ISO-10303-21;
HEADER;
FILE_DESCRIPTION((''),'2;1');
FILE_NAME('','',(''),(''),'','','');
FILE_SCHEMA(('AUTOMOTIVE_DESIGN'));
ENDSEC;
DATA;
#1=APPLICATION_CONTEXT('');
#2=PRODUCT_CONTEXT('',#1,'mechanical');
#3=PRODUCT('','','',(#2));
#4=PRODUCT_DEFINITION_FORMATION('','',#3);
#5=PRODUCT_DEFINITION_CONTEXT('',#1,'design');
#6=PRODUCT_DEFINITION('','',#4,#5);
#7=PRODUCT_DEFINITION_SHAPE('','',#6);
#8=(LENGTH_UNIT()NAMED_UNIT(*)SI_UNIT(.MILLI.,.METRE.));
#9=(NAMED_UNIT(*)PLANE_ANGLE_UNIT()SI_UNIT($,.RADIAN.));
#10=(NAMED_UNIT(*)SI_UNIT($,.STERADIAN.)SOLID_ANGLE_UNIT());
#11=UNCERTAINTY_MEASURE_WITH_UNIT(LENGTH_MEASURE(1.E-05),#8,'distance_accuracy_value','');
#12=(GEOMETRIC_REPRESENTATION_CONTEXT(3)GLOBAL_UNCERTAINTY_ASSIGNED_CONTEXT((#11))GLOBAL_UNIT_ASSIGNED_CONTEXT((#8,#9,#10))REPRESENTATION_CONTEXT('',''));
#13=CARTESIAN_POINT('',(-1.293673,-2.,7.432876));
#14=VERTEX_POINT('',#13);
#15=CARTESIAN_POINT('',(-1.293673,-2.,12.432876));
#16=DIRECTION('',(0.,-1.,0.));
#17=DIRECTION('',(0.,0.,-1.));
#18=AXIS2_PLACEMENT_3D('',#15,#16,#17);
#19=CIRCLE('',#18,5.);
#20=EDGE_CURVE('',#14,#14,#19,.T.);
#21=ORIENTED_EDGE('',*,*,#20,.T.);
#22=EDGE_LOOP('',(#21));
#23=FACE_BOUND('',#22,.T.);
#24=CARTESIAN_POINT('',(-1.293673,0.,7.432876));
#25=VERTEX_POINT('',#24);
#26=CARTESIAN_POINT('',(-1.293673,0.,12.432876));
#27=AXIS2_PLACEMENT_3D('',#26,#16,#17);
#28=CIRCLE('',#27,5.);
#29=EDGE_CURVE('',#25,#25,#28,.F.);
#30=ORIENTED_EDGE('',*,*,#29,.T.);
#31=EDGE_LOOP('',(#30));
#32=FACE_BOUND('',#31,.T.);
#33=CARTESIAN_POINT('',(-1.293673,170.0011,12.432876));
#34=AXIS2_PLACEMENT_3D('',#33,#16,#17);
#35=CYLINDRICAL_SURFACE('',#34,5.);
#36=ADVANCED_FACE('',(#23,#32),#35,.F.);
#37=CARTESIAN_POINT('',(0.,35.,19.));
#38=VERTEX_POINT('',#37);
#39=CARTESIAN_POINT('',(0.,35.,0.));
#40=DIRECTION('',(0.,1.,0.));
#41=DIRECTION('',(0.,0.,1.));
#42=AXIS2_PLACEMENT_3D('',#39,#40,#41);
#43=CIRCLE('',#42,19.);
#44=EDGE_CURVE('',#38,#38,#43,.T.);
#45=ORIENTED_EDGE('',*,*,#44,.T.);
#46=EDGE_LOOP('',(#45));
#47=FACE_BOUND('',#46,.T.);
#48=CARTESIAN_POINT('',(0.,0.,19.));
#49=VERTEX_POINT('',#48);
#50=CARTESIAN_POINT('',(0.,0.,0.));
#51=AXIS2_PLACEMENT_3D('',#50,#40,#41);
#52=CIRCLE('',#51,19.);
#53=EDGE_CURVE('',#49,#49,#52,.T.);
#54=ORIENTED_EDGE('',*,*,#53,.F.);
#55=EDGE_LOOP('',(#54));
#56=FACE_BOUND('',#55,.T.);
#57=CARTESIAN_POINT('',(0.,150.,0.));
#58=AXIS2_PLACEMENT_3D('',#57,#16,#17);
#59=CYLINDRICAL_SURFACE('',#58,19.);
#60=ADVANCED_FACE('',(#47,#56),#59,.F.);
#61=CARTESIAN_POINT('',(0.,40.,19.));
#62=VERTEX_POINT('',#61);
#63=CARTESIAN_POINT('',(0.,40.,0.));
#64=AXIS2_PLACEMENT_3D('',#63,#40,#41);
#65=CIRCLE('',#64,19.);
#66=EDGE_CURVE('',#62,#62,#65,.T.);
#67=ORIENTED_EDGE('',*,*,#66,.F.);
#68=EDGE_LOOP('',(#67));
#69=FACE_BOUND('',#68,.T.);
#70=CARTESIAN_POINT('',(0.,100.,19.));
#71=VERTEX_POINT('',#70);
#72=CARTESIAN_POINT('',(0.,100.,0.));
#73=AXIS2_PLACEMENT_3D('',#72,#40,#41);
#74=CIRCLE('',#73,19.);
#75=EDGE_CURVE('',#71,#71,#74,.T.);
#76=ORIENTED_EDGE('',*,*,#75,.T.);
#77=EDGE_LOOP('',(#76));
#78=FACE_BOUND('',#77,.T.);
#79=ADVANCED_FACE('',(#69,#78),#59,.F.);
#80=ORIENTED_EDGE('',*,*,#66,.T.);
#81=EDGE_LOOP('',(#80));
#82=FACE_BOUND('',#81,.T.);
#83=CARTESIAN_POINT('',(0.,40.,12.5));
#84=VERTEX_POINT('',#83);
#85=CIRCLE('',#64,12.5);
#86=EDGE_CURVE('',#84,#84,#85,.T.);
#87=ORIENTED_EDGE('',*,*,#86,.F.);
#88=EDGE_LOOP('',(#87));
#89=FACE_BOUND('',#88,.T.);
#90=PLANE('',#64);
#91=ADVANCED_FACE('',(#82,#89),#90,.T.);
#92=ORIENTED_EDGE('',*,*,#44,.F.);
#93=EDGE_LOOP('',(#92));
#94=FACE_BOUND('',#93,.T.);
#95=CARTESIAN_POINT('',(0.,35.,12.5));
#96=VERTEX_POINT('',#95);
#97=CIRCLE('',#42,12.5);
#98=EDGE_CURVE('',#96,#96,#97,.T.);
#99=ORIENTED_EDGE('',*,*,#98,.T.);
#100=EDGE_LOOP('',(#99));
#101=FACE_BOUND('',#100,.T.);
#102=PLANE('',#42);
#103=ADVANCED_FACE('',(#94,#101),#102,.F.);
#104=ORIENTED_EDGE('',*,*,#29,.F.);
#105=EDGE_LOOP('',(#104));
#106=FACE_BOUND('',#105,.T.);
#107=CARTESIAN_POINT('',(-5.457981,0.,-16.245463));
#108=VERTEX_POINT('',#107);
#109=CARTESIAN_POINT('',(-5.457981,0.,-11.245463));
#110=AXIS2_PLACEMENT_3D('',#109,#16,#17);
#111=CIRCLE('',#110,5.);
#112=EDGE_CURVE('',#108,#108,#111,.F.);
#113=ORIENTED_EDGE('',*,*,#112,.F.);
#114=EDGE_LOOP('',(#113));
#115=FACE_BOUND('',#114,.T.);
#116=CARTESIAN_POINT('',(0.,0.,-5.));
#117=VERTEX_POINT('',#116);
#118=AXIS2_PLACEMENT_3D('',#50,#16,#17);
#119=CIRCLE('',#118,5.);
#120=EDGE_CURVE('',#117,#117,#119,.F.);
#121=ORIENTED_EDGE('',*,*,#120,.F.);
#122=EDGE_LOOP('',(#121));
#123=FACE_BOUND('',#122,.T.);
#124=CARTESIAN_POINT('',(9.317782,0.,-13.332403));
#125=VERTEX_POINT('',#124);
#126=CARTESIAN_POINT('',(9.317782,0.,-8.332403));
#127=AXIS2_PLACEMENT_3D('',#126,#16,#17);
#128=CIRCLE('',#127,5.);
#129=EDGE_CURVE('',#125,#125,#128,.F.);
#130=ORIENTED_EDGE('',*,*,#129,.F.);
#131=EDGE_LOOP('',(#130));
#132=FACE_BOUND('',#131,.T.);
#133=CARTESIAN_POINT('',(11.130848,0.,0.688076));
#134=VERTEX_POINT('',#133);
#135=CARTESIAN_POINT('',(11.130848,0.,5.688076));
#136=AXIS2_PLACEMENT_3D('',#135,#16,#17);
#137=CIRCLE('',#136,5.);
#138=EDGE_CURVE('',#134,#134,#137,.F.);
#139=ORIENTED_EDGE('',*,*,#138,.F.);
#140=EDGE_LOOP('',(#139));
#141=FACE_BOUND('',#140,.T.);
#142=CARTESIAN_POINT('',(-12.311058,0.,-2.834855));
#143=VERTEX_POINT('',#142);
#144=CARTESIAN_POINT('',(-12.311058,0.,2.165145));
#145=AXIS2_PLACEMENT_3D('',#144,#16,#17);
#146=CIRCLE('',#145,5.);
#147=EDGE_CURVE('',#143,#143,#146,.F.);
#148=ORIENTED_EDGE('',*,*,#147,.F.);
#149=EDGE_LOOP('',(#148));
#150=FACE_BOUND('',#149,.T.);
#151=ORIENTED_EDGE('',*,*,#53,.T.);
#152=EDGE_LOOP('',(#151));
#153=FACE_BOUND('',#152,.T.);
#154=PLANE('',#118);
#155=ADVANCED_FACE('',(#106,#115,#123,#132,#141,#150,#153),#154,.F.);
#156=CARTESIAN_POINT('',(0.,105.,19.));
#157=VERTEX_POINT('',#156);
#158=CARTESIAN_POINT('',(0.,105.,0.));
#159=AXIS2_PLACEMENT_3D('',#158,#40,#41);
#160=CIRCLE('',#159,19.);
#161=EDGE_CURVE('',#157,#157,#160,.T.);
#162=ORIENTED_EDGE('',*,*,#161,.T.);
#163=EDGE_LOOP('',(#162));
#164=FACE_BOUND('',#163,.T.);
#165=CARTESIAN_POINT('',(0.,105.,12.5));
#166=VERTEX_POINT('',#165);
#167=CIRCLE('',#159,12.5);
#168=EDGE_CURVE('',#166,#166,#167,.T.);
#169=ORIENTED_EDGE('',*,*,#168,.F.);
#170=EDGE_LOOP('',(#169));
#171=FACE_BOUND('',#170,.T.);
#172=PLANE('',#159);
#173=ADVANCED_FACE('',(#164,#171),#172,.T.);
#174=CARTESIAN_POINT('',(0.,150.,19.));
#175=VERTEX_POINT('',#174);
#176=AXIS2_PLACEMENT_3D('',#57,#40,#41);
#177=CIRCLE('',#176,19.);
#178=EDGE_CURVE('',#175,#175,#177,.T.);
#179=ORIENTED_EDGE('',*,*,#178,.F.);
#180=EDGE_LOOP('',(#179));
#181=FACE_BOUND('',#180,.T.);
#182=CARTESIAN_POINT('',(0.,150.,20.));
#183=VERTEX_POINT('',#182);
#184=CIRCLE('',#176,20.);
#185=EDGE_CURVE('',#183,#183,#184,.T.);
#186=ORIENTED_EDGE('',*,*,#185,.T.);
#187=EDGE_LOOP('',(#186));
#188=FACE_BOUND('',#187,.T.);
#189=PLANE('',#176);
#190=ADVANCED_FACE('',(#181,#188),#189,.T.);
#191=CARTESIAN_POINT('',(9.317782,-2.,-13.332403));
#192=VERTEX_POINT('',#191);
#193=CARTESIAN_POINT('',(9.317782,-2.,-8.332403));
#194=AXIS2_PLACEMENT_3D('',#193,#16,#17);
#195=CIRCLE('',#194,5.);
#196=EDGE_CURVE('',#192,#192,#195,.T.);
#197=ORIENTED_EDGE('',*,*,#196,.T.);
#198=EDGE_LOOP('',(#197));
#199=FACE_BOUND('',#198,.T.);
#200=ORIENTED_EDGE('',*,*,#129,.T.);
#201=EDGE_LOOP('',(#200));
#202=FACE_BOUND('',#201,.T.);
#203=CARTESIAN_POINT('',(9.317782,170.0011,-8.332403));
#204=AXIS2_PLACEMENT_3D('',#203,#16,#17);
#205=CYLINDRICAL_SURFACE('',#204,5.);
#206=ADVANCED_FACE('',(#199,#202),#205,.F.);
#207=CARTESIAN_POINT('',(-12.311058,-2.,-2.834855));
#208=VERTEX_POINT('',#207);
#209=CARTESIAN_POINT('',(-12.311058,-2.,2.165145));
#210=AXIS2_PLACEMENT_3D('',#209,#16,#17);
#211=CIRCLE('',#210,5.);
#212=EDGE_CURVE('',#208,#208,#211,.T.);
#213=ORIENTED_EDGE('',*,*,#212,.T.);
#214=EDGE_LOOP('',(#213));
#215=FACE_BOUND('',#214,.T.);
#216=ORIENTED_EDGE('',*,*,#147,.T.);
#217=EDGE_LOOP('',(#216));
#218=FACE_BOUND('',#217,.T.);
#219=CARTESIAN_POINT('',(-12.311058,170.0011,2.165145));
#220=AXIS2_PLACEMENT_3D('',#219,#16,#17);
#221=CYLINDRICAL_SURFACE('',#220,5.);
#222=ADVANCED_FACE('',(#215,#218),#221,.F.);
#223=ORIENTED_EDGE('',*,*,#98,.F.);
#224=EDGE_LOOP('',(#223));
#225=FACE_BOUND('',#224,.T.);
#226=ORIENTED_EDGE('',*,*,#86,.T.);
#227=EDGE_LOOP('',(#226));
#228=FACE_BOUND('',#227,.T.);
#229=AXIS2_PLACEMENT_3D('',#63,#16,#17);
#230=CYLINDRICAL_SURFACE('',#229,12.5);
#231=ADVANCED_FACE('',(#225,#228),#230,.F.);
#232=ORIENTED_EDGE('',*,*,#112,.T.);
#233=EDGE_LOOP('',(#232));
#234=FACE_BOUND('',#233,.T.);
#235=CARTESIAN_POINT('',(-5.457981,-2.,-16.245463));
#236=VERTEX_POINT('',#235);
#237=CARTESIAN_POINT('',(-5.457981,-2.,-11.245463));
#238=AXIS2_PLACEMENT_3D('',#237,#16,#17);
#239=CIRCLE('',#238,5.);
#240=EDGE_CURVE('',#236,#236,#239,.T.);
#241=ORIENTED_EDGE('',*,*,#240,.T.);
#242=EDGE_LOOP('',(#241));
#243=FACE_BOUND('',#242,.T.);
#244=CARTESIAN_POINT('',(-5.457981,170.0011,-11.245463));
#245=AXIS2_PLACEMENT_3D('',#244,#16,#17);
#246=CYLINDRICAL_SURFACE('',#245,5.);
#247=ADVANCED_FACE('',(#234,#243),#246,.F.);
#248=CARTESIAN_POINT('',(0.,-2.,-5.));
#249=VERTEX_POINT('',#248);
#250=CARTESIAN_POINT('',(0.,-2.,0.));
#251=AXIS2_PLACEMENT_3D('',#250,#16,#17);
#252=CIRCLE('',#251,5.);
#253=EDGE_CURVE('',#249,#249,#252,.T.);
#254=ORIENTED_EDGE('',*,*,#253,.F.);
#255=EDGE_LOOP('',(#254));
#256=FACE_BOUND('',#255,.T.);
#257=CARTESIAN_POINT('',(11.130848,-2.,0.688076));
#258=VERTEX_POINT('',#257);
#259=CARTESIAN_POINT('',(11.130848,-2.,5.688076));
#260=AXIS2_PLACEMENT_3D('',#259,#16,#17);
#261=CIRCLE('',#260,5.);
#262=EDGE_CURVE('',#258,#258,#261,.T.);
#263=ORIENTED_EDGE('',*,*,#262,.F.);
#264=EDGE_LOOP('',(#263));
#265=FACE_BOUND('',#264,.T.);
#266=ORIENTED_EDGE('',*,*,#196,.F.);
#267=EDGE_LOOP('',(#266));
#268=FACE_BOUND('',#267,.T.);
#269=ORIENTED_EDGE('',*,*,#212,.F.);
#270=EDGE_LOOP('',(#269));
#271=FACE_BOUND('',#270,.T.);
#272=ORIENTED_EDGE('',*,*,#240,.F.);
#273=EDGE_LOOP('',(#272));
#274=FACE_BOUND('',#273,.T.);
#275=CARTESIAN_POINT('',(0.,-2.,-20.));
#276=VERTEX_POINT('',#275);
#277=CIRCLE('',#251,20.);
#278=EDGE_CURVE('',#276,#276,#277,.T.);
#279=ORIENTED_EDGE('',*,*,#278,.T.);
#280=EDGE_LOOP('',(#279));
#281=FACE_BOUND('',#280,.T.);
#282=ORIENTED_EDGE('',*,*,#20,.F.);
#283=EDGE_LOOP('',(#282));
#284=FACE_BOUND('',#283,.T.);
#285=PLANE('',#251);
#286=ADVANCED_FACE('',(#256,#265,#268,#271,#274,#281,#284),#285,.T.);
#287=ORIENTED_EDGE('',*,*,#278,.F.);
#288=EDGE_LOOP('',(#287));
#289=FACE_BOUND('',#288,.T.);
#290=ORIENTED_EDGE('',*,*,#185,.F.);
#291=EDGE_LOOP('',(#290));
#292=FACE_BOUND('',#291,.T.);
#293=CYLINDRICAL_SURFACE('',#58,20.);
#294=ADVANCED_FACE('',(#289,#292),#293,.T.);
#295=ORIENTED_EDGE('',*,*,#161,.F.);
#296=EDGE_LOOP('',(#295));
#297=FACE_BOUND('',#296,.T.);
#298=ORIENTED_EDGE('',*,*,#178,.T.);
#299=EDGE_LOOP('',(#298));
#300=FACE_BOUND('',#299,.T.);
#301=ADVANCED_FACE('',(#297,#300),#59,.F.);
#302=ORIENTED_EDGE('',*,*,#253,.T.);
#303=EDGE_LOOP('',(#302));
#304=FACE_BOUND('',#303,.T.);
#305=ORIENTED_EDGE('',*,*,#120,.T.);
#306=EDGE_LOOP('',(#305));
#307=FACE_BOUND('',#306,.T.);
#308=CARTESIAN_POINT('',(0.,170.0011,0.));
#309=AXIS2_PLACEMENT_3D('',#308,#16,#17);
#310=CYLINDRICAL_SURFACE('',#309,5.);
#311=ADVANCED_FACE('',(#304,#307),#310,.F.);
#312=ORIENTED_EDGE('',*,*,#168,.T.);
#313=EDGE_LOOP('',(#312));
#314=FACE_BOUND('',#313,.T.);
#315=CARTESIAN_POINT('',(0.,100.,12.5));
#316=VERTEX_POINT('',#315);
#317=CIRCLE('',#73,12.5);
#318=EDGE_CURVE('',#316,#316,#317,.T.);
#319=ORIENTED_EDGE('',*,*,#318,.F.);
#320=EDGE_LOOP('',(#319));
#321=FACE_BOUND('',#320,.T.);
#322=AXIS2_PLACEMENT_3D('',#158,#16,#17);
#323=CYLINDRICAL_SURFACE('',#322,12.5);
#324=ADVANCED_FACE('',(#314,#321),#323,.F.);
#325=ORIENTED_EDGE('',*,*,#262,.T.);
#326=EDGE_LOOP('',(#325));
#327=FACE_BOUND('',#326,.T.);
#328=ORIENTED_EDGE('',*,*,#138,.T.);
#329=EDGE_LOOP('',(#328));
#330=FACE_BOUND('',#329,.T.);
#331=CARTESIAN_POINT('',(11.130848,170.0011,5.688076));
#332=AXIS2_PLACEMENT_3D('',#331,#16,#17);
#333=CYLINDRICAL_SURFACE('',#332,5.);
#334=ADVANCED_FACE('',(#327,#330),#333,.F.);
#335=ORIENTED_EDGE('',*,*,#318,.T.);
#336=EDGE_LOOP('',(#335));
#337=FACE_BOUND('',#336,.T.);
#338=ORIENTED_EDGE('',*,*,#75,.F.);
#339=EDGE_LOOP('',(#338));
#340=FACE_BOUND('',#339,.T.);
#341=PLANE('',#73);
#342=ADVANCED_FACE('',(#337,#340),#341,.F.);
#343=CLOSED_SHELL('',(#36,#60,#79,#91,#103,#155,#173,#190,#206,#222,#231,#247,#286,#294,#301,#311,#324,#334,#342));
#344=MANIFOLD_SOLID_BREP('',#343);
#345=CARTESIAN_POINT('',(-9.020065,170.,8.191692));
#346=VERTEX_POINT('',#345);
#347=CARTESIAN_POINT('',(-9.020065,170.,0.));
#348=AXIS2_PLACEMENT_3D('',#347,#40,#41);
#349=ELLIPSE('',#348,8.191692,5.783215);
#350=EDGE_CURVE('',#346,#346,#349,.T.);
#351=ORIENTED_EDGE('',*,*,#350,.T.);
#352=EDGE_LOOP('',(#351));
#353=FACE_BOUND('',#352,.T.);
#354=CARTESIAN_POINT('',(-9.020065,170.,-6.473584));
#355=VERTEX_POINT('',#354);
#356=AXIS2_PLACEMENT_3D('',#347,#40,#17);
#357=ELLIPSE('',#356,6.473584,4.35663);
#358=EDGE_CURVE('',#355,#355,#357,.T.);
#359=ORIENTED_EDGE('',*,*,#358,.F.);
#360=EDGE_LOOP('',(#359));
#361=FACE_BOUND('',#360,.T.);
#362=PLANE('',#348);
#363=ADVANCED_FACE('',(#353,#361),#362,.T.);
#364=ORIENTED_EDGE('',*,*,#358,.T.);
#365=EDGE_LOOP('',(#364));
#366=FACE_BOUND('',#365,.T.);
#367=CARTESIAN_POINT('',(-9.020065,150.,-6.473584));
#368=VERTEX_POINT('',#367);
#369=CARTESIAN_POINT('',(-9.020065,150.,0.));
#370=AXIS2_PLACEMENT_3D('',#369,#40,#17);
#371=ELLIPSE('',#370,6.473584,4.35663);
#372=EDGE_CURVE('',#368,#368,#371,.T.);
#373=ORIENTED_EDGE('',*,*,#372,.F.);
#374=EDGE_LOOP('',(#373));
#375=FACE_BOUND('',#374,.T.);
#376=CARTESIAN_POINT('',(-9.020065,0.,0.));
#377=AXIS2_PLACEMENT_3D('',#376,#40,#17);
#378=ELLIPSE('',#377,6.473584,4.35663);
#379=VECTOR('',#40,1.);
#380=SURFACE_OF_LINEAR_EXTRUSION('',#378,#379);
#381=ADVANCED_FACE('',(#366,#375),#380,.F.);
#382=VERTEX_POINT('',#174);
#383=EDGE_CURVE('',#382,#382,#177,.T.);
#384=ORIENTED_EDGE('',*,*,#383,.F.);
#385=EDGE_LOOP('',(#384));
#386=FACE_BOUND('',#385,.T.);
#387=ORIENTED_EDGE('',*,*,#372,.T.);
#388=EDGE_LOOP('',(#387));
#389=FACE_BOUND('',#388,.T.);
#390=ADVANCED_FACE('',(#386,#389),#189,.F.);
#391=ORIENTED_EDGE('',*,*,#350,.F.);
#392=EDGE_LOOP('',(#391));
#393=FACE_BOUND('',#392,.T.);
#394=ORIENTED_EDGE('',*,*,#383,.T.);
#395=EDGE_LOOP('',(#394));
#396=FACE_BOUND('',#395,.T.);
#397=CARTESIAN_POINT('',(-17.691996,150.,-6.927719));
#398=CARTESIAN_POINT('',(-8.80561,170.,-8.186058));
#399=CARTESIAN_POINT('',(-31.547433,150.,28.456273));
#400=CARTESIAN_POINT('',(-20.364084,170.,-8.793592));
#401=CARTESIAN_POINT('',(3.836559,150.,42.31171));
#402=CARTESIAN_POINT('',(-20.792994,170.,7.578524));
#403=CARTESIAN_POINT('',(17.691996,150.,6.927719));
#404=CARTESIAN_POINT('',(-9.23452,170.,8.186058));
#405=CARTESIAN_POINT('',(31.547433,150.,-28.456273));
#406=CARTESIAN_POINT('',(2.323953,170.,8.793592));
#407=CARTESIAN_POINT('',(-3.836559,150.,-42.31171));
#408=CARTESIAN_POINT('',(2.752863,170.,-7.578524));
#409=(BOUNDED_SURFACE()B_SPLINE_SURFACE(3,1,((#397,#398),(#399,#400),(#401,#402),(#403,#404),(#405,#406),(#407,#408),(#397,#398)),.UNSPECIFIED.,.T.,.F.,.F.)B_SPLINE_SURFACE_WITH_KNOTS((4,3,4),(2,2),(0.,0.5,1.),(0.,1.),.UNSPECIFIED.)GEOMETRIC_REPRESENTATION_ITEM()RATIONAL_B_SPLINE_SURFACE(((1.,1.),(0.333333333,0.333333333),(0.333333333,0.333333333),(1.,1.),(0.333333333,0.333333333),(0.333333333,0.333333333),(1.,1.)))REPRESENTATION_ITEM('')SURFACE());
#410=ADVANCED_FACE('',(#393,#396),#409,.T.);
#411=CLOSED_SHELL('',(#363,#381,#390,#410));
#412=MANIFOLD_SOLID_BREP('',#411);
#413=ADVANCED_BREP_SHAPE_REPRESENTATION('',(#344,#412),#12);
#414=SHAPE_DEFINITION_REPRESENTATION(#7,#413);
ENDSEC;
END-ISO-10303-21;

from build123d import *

# Parameters (mm, degrees)
SKETCH1_R           = 20
SKETCH1_R_2         = 19
BOSS_EXTRUDE1_DEPTH = 150
SKETCH7_RX          = 6.473584377
SKETCH7_RY          = 4.356630244
CUT_EXTRUDE3_DEPTH  = 173.336879396
BOSS_EXTRUDE3_START = 2
SKETCH9_R           = 20
BOSS_EXTRUDE3_DEPTH = 2
SKETCH10_R          = 5
CUT_EXTRUDE5_DEPTH  = 2
SKETCH11_R          = 19
SKETCH11_R_2        = 12.5
BOSS_EXTRUDE4_DEPTH = 5
SKETCH12_R          = 19
SKETCH12_R_2        = 12.5
BOSS_EXTRUDE5_DEPTH = 5


with BuildPart() as part:
    # Sketch1 → Boss-Extrude1 (new body)
    with BuildSketch(Plane(origin=(0, 0, 0), x_dir=(1, 0, 0), z_dir=(0, 1, 0))):
        with Locations(Location((0, 0, 0), (0, 0, 270))):
            Circle(SKETCH1_R)
        with Locations(Location((0, 0, 0), (0, 0, 270))):
            Circle(SKETCH1_R_2, mode=Mode.SUBTRACT)
    extrude(amount=BOSS_EXTRUDE1_DEPTH)

    # Sketch9 → Boss-Extrude3 (add)
    with BuildSketch(Plane.XZ.offset(BOSS_EXTRUDE3_START)):
        with Locations(Location((0, 0, 0), (0, 0, 270))):
            Circle(SKETCH9_R)
    extrude(amount=-BOSS_EXTRUDE3_DEPTH)

    # Sketch10 → Cut-Extrude5 (cut)
    with BuildSketch(Plane.XZ.offset(2)):
        with Locations(Location((0, 0, 0), (0, 0, 270))):
            Circle(SKETCH10_R)
        with Locations(Location((-1.293672519, 12.432876233, 0), (0, 0, 270))):
            Circle(SKETCH10_R)
        with Locations(Location((11.130848453, 5.688076363, 0), (0, 0, 270))):
            Circle(SKETCH10_R)
        with Locations(Location((9.317782084, -8.332402837, 0), (0, 0, 270))):
            Circle(SKETCH10_R)
        with Locations(Location((-5.457980639, -11.245463412, 0), (0, 0, 270))):
            Circle(SKETCH10_R)
        with Locations(Location((-12.311057922, 2.165144991, 0), (0, 0, 270))):
            Circle(SKETCH10_R)
    extrude(amount=-CUT_EXTRUDE5_DEPTH, mode=Mode.SUBTRACT)

    # Sketch11 → Boss-Extrude4 (add)
    with BuildSketch(Plane(origin=(0, 35, 0), x_dir=(1, 0, 0), z_dir=(0, 1, 0))):
        with Locations(Location((0, 0, 0), (0, 0, 270))):
            Circle(SKETCH11_R)
        with Locations(Location((0, 0, 0), (0, 0, 270))):
            Circle(SKETCH11_R_2, mode=Mode.SUBTRACT)
    extrude(amount=BOSS_EXTRUDE4_DEPTH)

    # Sketch12 → Boss-Extrude5 (add)
    with BuildSketch(Plane(origin=(0, 100, 0), x_dir=(1, 0, 0), z_dir=(0, 1, 0))):
        with Locations(Location((0, 0, 0), (0, 0, 270))):
            Circle(SKETCH12_R)
        with Locations(Location((0, 0, 0), (0, 0, 270))):
            Circle(SKETCH12_R_2, mode=Mode.SUBTRACT)
    extrude(amount=BOSS_EXTRUDE5_DEPTH)


with BuildPart() as body_2:
    # Loft1: read off the stored shape, not the designer's step
    # Loft1: loft between two sections, ruled curve by curve
    loft1_from = [
        Edge.make_bspline([(-17.691995775, 150, -6.927718635), (-31.547433046, 150, 28.456272915), (3.836558504, 150, 42.311710186), (17.691995775, 150, 6.927718635), (31.547433046, 150, -28.456272915), (-3.836558504, 150, -42.311710186), (-17.691995775, 150, -6.927718635)], [0, 0, 0, 0, 0.5, 0.5, 0.5, 1, 1, 1, 1], 3, [1, 0.333333333, 0.333333333, 1, 0.333333333, 0.333333333, 1]),
    ]
    loft1_to = [
        Edge.make_bspline([(-8.805610447, 170, -8.186057952), (-20.364084354, 170, -8.793591776), (-20.792994332, 170, 7.578524127), (-9.234520424, 170, 8.186057952), (2.323953483, 170, 8.793591776), (2.75286346, 170, -7.578524127), (-8.805610447, 170, -8.186057952)], [0, 0, 0, 0, 0.5, 0.5, 0.5, 1, 1, 1, 1], 3, [1, 0.333333333, 0.333333333, 1, 0.333333333, 0.333333333, 1]),
    ]
    loft1 = Solid(Shell([*[Face.make_surface_from_curves(loft1_from[k], loft1_to[k]) for k in range(1)], Face(Wire(loft1_from)), Face(Wire(loft1_to))]))
    add(loft1)

    # Sketch7 → Cut-Extrude3 (cut, through all)
    with BuildSketch(Plane(origin=(0, 170, 0), x_dir=(1, 0, 0), z_dir=(0, 1, 0))):
        with Locations(Location((-9.020065436, 0), (0, 0, 90))):
            Ellipse(SKETCH7_RX, SKETCH7_RY)
    extrude(amount=-CUT_EXTRUDE3_DEPTH, mode=Mode.SUBTRACT)


solid = Compound([part.part, body_2.part])
